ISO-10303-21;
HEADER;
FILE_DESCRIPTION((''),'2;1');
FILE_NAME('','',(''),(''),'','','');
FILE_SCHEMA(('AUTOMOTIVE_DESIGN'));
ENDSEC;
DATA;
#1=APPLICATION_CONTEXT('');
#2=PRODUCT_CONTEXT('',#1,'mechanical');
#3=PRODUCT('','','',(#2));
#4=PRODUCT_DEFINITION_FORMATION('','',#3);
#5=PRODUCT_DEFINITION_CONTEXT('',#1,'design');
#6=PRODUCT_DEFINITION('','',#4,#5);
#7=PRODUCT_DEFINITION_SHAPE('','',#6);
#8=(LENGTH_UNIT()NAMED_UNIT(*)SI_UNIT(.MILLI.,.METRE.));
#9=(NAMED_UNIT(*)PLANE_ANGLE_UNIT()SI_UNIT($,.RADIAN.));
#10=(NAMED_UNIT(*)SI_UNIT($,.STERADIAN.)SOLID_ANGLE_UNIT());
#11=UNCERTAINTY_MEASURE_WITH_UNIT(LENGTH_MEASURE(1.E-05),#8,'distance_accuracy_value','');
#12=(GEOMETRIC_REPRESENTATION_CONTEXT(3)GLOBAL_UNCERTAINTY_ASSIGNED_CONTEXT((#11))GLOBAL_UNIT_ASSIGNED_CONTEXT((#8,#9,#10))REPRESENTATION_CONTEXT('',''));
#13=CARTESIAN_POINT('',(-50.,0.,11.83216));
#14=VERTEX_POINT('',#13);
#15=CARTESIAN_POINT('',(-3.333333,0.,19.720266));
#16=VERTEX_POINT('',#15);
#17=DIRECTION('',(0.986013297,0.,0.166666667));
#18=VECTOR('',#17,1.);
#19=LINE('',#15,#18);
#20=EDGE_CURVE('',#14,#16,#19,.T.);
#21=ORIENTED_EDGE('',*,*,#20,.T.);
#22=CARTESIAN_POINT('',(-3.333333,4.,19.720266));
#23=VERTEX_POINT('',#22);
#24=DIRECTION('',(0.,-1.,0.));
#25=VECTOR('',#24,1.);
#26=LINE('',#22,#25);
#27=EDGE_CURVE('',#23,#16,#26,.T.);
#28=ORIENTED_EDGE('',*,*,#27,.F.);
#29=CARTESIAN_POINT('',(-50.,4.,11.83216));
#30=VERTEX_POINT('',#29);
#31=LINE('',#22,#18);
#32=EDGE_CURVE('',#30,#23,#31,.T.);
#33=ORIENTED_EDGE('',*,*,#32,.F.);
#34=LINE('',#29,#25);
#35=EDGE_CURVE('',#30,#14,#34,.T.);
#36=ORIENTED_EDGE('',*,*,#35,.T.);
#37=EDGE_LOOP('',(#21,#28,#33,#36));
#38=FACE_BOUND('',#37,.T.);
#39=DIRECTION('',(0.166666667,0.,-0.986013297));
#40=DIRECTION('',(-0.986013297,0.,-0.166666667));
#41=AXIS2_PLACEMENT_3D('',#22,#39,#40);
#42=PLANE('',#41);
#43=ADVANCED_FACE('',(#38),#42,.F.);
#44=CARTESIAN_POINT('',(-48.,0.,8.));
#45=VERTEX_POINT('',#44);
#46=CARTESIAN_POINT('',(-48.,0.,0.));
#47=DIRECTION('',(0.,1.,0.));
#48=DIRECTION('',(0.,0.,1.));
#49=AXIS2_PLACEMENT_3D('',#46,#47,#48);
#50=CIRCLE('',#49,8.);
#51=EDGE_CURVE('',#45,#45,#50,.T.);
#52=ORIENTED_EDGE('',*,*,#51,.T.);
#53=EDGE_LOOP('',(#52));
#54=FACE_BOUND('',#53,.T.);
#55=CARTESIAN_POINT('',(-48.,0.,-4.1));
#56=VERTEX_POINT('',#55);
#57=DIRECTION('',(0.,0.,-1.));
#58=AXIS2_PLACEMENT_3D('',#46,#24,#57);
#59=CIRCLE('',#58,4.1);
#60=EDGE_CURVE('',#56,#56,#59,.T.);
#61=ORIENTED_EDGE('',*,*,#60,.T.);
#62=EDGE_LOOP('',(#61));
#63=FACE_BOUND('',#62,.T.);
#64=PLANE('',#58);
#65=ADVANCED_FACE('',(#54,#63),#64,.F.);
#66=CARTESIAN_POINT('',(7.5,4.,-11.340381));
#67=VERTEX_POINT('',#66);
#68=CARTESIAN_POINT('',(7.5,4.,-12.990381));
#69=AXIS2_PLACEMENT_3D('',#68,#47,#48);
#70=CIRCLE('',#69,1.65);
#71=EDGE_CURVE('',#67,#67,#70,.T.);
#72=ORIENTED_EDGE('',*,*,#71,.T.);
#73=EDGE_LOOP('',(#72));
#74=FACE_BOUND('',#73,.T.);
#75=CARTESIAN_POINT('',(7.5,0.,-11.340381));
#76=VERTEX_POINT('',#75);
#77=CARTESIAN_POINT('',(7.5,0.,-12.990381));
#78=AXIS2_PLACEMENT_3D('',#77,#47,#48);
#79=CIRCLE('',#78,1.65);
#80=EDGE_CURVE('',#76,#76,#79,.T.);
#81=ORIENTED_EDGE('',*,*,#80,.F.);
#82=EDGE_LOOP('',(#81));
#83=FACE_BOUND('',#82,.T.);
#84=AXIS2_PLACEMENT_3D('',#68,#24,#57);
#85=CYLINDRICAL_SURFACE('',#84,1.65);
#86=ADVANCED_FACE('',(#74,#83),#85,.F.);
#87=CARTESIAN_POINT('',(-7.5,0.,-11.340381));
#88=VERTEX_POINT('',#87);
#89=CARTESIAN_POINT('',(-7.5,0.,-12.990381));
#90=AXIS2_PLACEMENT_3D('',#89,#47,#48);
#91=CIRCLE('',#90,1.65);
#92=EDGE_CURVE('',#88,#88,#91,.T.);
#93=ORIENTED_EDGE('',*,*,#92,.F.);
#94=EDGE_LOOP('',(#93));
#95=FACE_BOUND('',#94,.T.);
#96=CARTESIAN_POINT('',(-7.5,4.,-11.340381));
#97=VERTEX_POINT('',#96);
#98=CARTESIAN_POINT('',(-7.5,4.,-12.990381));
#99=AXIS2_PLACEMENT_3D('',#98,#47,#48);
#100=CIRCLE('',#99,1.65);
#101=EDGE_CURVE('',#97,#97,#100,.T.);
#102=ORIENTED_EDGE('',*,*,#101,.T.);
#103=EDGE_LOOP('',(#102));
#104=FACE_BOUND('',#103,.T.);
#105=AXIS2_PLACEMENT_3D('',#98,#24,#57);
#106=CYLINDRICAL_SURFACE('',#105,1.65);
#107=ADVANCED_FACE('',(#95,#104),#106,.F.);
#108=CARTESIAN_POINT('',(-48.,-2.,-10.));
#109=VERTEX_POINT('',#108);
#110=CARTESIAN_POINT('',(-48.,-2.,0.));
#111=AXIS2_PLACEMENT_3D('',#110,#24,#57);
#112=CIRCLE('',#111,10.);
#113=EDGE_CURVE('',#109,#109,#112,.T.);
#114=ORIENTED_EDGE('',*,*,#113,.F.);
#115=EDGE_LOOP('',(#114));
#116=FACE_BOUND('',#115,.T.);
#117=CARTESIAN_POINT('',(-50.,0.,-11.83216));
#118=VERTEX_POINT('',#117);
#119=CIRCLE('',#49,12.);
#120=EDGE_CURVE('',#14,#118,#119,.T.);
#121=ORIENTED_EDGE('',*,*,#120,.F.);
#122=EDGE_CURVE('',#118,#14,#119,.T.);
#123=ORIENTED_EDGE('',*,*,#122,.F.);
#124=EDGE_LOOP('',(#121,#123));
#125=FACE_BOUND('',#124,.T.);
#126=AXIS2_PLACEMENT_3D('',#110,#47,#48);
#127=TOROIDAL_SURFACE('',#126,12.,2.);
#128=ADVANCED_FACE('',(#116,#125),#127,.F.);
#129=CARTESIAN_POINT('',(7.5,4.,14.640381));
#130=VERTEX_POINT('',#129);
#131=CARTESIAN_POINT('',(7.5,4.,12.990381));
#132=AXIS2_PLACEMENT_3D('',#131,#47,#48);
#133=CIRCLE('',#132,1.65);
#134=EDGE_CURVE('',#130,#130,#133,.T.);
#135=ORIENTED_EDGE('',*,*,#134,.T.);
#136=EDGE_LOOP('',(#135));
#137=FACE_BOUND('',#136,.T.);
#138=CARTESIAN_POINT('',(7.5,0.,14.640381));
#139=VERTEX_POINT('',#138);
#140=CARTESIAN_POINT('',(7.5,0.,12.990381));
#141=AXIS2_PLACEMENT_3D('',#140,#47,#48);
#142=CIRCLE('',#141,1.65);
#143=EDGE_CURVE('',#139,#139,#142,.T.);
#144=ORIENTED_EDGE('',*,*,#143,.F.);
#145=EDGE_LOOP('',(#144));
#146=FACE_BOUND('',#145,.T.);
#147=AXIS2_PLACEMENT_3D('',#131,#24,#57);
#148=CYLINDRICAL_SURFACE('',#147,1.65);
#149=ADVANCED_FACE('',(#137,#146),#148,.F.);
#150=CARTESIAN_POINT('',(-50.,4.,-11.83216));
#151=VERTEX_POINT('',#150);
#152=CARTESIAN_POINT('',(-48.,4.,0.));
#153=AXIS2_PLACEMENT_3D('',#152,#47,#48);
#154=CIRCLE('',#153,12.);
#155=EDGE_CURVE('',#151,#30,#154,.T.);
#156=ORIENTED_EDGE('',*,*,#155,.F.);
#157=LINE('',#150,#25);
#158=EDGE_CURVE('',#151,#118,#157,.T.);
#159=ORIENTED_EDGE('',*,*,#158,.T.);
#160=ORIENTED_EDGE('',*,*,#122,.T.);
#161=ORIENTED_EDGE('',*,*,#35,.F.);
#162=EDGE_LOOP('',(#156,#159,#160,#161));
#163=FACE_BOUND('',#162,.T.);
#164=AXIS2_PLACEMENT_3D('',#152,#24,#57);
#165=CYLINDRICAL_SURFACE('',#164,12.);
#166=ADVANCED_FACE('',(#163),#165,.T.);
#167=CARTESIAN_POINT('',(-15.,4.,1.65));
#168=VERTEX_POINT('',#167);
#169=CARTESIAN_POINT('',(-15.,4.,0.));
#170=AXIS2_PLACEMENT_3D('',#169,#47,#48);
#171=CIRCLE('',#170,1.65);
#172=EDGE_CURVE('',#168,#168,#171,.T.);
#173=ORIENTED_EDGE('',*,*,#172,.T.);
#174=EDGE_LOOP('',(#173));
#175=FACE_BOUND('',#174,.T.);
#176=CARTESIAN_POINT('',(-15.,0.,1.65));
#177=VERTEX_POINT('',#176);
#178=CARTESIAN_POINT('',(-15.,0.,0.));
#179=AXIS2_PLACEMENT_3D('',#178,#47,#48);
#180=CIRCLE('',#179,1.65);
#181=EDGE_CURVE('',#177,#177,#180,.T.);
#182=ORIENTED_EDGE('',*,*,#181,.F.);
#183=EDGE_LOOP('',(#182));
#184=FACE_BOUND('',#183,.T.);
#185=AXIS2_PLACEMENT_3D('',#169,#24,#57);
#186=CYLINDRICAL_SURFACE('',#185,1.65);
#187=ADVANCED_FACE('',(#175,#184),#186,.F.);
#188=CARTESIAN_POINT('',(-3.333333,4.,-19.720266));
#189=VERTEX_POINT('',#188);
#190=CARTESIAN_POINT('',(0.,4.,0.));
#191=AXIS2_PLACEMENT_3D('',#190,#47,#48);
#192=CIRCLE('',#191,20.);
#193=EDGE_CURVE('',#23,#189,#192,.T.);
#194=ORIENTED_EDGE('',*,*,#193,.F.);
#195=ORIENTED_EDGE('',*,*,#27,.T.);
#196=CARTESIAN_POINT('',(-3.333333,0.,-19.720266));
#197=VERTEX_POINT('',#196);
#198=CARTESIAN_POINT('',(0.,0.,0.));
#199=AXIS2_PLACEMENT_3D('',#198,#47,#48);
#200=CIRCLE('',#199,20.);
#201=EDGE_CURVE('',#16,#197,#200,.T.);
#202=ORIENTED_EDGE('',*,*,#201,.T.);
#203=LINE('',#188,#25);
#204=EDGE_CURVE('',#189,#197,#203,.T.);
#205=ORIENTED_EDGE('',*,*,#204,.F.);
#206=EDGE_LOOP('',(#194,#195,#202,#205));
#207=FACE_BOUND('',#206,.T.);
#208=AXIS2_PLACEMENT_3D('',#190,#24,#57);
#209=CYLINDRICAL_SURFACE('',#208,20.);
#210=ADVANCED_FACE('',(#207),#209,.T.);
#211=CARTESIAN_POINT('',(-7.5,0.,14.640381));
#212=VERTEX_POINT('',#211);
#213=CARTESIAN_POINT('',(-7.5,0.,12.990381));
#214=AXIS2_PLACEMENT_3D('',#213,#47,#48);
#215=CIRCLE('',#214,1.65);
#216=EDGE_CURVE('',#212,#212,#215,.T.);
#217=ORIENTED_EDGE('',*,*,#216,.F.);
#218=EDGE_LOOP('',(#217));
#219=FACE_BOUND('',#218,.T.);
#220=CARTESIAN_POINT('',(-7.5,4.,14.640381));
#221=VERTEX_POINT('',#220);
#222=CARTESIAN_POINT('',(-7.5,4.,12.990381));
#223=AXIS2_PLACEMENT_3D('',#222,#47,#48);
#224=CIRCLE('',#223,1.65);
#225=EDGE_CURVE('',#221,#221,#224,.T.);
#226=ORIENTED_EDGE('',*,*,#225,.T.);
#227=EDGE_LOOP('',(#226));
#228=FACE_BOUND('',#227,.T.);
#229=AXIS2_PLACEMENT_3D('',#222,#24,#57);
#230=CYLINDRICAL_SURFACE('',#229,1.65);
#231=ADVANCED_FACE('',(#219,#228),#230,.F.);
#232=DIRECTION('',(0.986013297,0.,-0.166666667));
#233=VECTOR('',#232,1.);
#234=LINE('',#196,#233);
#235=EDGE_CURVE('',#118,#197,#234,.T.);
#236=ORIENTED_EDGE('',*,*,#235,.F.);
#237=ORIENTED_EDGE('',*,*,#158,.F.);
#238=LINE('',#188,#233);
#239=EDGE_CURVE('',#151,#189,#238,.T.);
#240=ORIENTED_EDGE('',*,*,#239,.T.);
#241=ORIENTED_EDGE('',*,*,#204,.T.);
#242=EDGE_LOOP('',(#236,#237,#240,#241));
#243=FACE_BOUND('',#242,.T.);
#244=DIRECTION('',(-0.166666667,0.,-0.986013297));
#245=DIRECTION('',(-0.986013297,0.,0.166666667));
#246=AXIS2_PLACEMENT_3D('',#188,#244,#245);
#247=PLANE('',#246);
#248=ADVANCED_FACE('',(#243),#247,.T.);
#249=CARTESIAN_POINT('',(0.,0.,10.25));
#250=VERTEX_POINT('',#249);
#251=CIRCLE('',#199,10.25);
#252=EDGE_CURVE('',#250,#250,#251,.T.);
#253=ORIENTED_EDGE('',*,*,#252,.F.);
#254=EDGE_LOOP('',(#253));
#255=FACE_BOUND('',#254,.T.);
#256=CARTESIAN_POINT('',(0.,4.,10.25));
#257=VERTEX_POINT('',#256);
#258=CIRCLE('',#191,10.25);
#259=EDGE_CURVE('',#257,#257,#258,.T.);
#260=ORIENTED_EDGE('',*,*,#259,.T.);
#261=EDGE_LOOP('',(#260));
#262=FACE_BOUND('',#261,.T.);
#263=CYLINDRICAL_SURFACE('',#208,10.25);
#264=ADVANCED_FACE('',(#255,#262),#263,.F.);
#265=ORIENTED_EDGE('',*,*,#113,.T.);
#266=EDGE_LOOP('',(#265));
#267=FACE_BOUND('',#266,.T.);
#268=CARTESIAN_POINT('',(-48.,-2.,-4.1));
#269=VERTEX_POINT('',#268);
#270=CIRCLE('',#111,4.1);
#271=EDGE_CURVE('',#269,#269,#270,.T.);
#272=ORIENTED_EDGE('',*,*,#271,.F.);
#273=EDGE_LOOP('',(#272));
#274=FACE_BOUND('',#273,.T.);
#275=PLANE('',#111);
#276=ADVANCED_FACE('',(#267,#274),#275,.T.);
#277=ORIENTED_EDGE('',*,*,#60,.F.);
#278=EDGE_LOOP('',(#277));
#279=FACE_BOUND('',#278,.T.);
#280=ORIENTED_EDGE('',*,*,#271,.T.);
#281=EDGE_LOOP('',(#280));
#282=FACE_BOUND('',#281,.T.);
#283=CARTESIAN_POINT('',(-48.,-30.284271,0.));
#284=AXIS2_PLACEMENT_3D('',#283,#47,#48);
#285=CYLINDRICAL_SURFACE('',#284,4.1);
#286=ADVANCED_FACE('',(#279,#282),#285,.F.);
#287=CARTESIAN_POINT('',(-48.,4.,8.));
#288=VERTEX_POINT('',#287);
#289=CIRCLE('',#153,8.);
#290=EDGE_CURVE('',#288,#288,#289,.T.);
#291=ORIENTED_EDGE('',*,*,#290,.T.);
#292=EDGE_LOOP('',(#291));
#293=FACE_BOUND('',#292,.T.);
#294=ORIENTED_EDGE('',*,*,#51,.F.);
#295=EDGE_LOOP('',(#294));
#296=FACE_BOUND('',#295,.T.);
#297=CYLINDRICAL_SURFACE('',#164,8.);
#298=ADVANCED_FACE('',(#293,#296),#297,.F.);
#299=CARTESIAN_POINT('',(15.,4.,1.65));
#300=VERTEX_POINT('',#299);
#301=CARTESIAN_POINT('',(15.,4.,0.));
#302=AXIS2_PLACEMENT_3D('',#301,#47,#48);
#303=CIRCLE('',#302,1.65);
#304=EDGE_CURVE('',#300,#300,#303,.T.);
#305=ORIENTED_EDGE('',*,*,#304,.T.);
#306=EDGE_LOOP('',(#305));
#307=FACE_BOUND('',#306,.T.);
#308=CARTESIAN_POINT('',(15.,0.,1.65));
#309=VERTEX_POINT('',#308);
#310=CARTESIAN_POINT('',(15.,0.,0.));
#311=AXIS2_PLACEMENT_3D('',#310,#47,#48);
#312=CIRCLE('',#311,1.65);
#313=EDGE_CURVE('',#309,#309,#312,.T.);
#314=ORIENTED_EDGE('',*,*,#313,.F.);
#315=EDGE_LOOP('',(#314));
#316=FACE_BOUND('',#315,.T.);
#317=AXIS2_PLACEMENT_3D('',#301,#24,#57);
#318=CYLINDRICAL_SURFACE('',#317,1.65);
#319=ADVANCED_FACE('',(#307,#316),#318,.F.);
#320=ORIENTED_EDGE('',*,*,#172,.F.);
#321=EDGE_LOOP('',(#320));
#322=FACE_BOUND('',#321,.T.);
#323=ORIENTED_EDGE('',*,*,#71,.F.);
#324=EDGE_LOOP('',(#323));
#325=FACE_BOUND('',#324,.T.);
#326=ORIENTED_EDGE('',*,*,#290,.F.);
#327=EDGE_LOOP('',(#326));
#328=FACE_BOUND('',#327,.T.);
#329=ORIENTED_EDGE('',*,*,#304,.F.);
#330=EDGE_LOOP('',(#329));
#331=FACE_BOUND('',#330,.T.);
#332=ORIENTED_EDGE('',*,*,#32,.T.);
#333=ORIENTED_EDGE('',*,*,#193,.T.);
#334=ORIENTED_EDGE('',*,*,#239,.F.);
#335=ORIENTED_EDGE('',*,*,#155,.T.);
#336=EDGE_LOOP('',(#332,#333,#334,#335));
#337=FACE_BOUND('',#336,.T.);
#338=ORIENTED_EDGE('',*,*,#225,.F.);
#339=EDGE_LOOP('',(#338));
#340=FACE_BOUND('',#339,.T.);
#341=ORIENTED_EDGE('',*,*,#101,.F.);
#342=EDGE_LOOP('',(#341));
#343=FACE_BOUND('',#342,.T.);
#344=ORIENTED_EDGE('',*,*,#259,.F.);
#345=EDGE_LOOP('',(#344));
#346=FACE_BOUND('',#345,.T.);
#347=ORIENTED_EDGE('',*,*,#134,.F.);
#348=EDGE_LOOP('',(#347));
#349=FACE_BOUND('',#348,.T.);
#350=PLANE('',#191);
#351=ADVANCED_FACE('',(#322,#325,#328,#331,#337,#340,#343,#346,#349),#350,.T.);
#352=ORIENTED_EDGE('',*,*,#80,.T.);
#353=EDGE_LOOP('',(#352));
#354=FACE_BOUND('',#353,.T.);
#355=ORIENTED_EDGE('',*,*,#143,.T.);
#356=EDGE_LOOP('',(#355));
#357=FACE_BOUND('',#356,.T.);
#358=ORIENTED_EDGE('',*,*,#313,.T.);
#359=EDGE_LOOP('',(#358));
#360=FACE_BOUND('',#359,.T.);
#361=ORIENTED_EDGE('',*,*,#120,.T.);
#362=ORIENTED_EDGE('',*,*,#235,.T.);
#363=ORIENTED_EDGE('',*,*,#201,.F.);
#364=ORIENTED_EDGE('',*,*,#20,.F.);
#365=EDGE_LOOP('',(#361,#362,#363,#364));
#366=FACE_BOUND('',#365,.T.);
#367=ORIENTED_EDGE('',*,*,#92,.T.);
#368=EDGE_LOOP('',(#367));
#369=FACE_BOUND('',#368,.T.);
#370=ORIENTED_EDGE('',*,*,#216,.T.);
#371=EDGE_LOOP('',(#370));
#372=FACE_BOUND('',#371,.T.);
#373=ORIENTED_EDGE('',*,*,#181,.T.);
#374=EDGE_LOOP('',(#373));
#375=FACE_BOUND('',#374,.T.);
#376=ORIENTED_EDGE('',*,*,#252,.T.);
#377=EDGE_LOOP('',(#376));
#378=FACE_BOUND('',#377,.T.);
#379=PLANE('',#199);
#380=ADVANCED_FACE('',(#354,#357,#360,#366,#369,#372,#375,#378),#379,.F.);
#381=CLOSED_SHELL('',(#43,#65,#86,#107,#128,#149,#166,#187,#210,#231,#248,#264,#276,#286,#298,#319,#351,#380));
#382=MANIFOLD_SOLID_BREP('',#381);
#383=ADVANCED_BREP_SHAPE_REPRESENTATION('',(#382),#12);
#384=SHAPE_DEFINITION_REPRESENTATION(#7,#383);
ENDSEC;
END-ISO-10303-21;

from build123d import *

# Parameters (mm, degrees)
SKETCH1_R           = 8
SKETCH1_R_2         = 1.65
SKETCH1_R_3         = 10.25
BOSS_EXTRUDE1_DEPTH = 4
SKETCH4_R           = 8
SKETCH4_R_2         = 4.15
BOSS_EXTRUDE3_DEPTH = 2
SKETCH5_R           = 10
SKETCH5_R_2         = 4.1
BOSS_EXTRUDE4_DEPTH = 2
FILLET6_R           = 2


with BuildPart() as part:
    # Sketch1 → Boss-Extrude1 (new body)
    with BuildSketch(Plane(origin=(0, 0, 0), x_dir=(1, 0, 0), z_dir=(0, 1, 0))):
        with BuildLine():
            Line((-3.333333333, 19.720265944), (-50, 11.832159566))
            ThreePointArc((-50, 11.832159566), (-60, 0), (-50, -11.832159566))
            Line((-50, -11.832159566), (-3.333333333, -19.720265944))
            ThreePointArc((-3.333333333, -19.720265944), (20, 0), (-3.333333333, 19.720265944))
        make_face()
        with Locations(Location((-48, 0, 0), (0, 0, 270))):
            Circle(SKETCH1_R, mode=Mode.SUBTRACT)
        with Locations(Location((-7.5, -12.990381057, 0), (0, 0, 270))):
            Circle(SKETCH1_R_2, mode=Mode.SUBTRACT)
        with Locations(Location((7.5, -12.990381057, 0), (0, 0, 270))):
            Circle(SKETCH1_R_2, mode=Mode.SUBTRACT)
        with Locations(Location((15, 0, 0), (0, 0, 270))):
            Circle(SKETCH1_R_2, mode=Mode.SUBTRACT)
        with BuildLine():
            ThreePointArc((-13.35, 0), (-15, -1.65), (-16.65, 0))
            ThreePointArc((-16.65, 0), (-15, 1.65), (-13.35, 0))
        make_face(mode=Mode.SUBTRACT)
        with Locations(Location((0, 0, 0), (0, 0, 270))):
            Circle(SKETCH1_R_3, mode=Mode.SUBTRACT)
        with Locations(Location((-7.5, 12.990381057, 0), (0, 0, 270))):
            Circle(SKETCH1_R_2, mode=Mode.SUBTRACT)
        with Locations(Location((7.5, 12.990381057, 0), (0, 0, 270))):
            Circle(SKETCH1_R_2, mode=Mode.SUBTRACT)
    extrude(amount=BOSS_EXTRUDE1_DEPTH)



with BuildPart() as body_2:
    # Sketch4 → Boss-Extrude3 (new body)
    with BuildSketch(Plane.XZ):
        with Locations(Location((-48, 0, 0), (0, 0, 90))):
            Circle(SKETCH4_R)
        with Locations(Location((-48, 0, 0), (0, 0, 270))):
            Circle(SKETCH4_R_2, mode=Mode.SUBTRACT)
    extrude(amount=BOSS_EXTRUDE3_DEPTH)


with BuildPart() as part_1:
    add(part.part)

    add(body_2.part)  # Boss-Extrude4 merges body 2
    # Sketch5 → Boss-Extrude4 (add)
    with BuildSketch(Plane.XZ):
        with Locations(Location((-48, 0, 0), (0, 0, 90))):
            Circle(SKETCH5_R)
        with Locations(Location((-48, 0, 0), (0, 0, 270))):
            Circle(SKETCH5_R_2, mode=Mode.SUBTRACT)
    extrude(amount=BOSS_EXTRUDE4_DEPTH)

    # Fillet6
    fillet6_edges = [part_1.edges().sort_by_distance(p)[0] for p in [
        (-48, 0, -10),
    ]]
    fillet(fillet6_edges, radius=FILLET6_R - 0.0001)  # a hair under: the kernel refuses the full size


solid = part_1.part
